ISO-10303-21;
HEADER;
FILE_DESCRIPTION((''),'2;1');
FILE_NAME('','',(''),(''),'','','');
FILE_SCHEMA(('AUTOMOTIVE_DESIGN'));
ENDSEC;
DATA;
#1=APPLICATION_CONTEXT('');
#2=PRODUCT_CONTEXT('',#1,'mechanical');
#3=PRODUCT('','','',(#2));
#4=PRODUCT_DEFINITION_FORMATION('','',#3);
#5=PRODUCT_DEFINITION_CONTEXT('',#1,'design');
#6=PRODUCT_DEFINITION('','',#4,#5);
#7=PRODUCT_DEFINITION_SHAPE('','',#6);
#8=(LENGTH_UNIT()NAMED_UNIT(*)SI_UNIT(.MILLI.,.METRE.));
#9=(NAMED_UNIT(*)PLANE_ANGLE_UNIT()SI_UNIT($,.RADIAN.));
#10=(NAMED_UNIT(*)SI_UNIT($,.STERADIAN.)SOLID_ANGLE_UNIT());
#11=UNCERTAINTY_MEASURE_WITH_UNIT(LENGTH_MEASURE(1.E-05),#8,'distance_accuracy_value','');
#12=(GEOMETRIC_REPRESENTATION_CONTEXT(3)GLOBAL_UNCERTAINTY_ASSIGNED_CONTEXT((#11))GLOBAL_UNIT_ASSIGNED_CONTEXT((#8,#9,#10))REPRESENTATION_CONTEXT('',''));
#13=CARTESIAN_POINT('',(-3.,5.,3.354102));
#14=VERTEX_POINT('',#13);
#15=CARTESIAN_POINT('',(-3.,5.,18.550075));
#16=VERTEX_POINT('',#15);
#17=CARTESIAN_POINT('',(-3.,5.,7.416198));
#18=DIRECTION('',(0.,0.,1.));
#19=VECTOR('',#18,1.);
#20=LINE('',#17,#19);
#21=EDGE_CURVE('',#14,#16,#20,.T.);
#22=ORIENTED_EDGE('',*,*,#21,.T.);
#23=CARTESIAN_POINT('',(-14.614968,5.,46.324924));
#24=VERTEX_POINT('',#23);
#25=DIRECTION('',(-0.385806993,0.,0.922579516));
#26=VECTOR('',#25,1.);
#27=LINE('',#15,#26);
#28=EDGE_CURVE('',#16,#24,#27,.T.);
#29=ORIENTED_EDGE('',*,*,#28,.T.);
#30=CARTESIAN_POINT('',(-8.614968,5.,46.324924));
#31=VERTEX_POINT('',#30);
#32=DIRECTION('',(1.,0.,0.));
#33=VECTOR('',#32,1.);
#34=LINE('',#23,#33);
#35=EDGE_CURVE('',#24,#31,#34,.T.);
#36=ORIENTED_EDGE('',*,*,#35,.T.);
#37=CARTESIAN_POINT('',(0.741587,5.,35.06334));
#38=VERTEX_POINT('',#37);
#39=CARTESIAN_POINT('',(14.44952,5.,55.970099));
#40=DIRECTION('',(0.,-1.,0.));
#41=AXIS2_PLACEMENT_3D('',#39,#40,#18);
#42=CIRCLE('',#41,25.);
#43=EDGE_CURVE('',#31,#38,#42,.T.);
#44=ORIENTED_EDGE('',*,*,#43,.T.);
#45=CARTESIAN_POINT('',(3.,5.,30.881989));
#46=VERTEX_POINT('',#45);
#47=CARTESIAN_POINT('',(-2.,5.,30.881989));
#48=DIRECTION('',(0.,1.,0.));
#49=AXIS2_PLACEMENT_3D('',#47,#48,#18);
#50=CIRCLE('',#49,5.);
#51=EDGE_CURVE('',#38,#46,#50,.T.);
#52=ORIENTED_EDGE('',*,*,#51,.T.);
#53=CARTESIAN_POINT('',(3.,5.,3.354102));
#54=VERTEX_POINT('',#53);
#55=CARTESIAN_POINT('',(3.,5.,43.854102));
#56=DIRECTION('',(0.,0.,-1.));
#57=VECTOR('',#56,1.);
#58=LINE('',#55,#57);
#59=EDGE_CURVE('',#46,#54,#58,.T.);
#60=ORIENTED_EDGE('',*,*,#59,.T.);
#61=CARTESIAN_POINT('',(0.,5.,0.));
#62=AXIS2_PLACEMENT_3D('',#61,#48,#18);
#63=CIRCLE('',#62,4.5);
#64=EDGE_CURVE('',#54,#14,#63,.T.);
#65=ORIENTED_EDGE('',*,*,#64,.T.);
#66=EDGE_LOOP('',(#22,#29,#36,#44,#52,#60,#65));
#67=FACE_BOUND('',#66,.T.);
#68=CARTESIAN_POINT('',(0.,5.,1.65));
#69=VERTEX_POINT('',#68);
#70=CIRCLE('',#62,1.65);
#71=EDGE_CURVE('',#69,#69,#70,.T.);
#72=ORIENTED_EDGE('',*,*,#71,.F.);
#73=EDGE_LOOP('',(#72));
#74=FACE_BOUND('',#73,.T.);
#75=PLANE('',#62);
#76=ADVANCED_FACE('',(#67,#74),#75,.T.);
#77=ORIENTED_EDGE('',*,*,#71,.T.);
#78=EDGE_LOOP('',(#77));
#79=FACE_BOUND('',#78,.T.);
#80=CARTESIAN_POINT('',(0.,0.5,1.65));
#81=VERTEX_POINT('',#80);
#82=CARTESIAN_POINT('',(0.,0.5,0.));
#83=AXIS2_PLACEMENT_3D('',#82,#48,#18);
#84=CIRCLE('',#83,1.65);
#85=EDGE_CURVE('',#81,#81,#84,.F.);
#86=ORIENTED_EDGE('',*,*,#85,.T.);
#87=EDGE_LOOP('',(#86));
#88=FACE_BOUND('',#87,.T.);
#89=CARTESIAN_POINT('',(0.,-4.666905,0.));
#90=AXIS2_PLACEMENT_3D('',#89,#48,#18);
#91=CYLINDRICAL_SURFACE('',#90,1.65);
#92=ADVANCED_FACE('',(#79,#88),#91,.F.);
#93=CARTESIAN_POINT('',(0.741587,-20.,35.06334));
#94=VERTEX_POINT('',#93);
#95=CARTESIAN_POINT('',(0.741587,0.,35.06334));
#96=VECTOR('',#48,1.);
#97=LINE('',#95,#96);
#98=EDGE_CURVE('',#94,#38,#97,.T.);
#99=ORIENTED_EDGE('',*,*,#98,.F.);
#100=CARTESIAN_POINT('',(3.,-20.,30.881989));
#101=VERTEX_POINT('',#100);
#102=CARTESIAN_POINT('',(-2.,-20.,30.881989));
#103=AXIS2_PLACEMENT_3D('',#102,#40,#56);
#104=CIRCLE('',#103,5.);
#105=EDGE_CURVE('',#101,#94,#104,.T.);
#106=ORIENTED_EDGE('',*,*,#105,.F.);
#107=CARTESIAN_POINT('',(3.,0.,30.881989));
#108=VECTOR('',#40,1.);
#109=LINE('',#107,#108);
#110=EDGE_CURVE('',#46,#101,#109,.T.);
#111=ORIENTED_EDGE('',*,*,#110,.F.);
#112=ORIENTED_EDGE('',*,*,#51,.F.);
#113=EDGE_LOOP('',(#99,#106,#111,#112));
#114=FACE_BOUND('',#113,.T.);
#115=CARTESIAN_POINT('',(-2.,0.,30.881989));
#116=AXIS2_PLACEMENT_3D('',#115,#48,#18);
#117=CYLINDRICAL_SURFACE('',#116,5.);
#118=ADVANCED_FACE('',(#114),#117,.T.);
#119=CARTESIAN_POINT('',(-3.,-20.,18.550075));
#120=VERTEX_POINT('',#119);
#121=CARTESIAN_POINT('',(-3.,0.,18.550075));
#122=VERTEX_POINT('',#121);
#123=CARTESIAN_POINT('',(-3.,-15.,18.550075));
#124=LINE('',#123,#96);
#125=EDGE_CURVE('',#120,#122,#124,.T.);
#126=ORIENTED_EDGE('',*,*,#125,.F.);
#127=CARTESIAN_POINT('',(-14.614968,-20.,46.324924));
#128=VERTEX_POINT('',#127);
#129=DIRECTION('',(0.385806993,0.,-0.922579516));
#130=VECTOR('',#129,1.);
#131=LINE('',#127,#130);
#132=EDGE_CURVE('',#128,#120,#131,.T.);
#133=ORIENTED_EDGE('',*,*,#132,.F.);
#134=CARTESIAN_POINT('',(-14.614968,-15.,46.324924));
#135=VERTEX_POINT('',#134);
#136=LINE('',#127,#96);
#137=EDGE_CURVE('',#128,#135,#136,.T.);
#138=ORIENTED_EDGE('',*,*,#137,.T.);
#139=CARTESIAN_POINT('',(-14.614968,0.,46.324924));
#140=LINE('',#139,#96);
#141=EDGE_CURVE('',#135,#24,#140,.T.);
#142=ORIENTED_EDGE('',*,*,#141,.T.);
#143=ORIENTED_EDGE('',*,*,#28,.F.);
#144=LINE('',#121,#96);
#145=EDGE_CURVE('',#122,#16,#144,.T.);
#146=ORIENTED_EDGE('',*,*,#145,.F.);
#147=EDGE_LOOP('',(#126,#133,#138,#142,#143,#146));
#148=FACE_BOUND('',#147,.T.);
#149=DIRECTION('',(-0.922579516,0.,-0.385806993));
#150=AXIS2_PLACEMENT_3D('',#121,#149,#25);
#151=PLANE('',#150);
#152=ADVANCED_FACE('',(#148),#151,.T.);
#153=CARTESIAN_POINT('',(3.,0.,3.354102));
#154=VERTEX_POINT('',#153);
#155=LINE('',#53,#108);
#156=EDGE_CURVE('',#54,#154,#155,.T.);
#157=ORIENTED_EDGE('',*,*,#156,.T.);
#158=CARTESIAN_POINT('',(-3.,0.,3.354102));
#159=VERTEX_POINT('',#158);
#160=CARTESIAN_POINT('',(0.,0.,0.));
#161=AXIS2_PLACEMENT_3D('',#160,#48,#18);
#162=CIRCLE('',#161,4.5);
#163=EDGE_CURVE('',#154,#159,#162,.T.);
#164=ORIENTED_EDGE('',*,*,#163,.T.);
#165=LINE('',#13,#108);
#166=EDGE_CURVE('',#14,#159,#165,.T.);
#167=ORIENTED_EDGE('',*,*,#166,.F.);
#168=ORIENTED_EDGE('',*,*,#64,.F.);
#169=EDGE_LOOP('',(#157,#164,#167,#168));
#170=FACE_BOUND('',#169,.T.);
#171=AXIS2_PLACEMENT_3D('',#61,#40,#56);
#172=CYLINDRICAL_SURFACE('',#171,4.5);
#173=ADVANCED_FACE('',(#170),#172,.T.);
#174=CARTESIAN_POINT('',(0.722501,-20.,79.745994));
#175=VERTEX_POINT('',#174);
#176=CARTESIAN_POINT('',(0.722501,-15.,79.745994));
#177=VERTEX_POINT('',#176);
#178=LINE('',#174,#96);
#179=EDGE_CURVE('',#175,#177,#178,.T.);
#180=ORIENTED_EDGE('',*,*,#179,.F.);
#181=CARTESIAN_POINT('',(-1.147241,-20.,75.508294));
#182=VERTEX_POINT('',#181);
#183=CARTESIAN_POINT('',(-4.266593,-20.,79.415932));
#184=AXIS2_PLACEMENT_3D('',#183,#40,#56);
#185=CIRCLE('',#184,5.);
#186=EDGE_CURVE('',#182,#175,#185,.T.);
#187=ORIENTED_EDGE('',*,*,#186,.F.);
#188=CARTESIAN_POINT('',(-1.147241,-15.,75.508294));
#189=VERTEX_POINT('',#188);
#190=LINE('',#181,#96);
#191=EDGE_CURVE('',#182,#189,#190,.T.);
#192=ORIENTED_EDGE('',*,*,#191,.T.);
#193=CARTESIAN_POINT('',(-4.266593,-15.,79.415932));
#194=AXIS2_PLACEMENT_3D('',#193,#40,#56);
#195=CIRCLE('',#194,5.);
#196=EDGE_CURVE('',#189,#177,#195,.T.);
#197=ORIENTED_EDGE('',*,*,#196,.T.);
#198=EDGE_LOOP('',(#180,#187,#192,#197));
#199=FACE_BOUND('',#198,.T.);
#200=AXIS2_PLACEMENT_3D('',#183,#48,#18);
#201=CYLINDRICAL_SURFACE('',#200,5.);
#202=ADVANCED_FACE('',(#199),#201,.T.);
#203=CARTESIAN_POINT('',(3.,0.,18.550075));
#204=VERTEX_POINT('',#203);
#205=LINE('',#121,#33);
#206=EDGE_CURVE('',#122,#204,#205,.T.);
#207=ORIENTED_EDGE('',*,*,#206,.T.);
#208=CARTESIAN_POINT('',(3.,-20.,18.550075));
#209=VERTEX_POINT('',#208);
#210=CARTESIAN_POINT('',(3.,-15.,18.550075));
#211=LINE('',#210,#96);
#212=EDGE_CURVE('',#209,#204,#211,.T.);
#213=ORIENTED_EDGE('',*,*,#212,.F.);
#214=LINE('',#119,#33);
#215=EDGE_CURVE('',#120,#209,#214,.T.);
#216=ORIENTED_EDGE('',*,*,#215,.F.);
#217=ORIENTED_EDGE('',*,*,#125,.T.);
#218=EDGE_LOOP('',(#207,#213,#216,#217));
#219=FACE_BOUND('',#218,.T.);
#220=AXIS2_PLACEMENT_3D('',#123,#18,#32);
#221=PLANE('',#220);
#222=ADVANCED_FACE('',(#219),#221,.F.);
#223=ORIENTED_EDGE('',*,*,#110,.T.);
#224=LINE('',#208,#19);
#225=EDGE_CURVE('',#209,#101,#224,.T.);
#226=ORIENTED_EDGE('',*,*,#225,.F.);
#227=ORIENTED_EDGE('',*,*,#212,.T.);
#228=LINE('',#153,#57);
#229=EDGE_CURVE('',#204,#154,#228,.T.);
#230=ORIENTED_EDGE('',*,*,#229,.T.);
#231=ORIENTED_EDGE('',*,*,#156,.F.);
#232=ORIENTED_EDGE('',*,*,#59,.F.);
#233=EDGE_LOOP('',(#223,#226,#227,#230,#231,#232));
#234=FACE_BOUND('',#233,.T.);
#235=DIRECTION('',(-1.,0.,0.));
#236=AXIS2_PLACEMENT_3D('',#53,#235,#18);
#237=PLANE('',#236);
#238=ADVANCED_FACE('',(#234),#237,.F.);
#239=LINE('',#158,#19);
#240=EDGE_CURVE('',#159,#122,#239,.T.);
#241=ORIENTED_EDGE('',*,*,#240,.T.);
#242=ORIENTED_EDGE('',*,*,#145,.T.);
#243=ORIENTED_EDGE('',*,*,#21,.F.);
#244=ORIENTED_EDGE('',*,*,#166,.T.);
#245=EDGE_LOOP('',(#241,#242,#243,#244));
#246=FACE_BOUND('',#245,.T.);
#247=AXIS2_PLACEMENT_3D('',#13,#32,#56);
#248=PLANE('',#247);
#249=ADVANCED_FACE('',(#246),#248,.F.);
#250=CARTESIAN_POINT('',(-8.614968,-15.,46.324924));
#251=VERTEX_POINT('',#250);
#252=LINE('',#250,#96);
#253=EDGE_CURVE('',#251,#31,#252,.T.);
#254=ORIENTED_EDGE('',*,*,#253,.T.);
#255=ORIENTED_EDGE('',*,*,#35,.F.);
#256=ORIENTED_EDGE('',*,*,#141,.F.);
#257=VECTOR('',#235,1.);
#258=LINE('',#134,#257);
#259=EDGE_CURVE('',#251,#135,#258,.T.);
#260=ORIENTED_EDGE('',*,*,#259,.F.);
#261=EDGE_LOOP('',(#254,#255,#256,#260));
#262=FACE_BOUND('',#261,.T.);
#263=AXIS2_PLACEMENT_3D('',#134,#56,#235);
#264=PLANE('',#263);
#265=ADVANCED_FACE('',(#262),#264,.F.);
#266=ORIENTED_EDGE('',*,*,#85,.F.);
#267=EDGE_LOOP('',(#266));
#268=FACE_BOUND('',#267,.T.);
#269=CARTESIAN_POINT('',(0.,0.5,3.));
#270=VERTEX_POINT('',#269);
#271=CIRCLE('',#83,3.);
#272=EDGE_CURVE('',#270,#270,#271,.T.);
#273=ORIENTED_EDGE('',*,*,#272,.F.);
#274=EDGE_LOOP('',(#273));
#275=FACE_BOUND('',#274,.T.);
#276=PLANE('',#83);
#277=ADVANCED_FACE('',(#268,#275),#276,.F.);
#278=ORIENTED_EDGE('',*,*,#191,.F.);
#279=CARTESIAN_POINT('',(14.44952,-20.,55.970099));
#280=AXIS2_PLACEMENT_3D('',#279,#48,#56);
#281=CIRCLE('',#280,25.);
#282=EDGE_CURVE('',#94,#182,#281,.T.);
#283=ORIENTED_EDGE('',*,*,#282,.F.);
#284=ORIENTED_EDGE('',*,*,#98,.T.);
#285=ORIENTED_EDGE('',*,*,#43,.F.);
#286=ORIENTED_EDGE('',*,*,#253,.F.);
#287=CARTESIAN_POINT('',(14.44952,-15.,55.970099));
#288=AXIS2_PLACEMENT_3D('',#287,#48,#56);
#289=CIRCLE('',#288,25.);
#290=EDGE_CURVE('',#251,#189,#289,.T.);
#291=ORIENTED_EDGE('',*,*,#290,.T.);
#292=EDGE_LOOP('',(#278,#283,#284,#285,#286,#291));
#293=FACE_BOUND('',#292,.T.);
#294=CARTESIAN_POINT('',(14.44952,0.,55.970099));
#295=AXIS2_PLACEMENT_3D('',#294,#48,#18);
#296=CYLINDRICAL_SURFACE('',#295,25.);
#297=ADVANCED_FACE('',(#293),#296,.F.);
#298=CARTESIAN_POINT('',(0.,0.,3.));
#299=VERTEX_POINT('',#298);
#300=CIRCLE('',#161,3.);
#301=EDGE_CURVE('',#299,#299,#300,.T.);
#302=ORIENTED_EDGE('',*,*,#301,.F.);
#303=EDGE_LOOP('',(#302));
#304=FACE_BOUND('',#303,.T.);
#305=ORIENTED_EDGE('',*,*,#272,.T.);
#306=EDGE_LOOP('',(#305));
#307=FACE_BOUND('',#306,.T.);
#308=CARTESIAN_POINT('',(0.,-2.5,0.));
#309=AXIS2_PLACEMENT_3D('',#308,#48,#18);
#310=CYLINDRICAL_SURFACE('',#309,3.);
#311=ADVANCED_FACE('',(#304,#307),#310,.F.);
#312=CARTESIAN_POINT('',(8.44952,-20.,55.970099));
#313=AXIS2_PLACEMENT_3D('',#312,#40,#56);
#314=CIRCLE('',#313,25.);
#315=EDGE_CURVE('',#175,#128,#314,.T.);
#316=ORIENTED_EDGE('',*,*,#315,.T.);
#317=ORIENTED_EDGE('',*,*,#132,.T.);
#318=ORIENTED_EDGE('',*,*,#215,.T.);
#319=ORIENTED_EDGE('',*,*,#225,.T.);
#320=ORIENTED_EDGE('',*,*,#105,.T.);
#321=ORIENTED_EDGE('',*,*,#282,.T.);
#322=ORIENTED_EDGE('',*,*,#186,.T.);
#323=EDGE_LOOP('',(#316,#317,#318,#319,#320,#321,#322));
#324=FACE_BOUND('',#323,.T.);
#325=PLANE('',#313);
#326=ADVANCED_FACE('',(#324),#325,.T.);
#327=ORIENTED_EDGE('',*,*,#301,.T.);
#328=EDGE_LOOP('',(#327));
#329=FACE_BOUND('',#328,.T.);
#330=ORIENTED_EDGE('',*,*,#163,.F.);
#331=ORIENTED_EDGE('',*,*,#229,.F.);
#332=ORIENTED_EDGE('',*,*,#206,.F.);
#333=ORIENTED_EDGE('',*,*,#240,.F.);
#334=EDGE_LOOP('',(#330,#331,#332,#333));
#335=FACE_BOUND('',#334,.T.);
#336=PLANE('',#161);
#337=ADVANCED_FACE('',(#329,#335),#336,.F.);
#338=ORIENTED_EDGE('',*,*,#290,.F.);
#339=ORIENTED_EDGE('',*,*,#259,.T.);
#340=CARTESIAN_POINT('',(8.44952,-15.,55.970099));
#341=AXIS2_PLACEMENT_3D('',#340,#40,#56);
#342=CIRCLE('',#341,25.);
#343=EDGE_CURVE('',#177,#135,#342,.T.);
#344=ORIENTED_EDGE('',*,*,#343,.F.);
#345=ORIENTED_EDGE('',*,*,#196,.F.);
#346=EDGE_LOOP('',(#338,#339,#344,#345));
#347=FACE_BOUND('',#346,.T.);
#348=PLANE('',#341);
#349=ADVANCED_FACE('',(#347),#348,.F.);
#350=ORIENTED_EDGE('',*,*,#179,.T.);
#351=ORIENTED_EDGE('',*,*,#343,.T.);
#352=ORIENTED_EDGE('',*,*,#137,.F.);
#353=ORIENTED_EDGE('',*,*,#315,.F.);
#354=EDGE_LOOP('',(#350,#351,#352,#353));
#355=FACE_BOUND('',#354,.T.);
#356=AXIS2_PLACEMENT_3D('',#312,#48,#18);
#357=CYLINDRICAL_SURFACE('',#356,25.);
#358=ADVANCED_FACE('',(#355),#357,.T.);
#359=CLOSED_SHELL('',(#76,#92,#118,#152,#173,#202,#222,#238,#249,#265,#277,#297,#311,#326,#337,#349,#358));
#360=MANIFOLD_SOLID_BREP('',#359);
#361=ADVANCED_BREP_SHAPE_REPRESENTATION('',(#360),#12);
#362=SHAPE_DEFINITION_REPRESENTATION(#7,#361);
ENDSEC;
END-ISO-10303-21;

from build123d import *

# Parameters (mm, degrees)
EXTRUDE_2_DEPTH     = 5
SKETCH_4_R          = 1.65
CUT_EXTRUDE_1_DEPTH = 5
EXTRUDE_3_DEPTH     = 5
CUT_EXTRUDE_START   = -4.5
SKETCH_7_R          = 3
CUT_EXTRUDE_2_DEPTH = 3
CUT_EXTRUDE_3_DEPTH = 7.5
EXTRUDE_4_DEPTH     = 5
FILLET_1_R          = 5
FILLET_2_R          = 5
EXTRUDE_5_DEPTH     = 15
EXTRUDE_6_DEPTH     = 5
CUT_EXTRUDE_START_2 = -5
CUT_EXTRUDE_4_DEPTH = 5


with BuildPart() as part:
    # 草图3 → 凸台-拉伸2 (new body)
    with BuildSketch(Plane(origin=(0, 0, 0), x_dir=(1, 0, 0), z_dir=(0, 1, 0))):
        with BuildLine():
            Line((-3, -3.354101966), (-3, -7.416198487))
            Line((-3, -7.416198487), (-3, -43.854101966))
            Line((-3, -43.854101966), (3, -43.854101966))
            Line((3, -43.854101966), (3, -10.583005244))
            Line((3, -10.583005244), (3, -7.416198487))
            Line((3, -7.416198487), (3, -3.354101966))
            ThreePointArc((3, -3.354101966), (0, 4.5), (-3, -3.354101966))
        make_face()
    extrude(amount=EXTRUDE_2_DEPTH)

    # 草图4 → 切除-拉伸1 (cut)
    with BuildSketch(Plane(origin=(0, 5, 0), x_dir=(1, 0, 0), z_dir=(0, 1, 0))):
        with Locations(Location((0, 0, 0), (0, 0, 270))):
            Circle(SKETCH_4_R)
    extrude(amount=-CUT_EXTRUDE_1_DEPTH, mode=Mode.SUBTRACT)

    # 草图6 → 凸台-拉伸3 (add)
    with BuildSketch(Plane(origin=(0, 5, 0), x_dir=(1, 0, 0), z_dir=(0, 1, 0))):
        with BuildLine():
            Line((3, -33.74604712), (-3, -33.74604712))
            ThreePointArc((-3, -33.74604712), (-16.46902092, -57.986607816), (0.722500961, -79.745993902))
            Line((0.722500961, -79.745993902), (1.949520222, -77.620734201))
            ThreePointArc((1.949520222, -77.620734201), (-10.543317179, -55.371702353), (3, -33.74604712))
        make_face()
    extrude(amount=-EXTRUDE_3_DEPTH)

    # 草图7 → 切除-拉伸2 (cut)
    with BuildSketch(Plane(origin=(0, 5, 0), x_dir=(1, 0, 0), z_dir=(0, 1, 0)).offset(CUT_EXTRUDE_START)):
        with Locations(Location((0, 0, 0), (0, 0, 270))):
            Circle(SKETCH_7_R)
    extrude(amount=-CUT_EXTRUDE_2_DEPTH, mode=Mode.SUBTRACT)

    # 草图8 → 切除-拉伸3 (cut)
    with BuildSketch(Plane(origin=(0, 5, 0), x_dir=(1, 0, 0), z_dir=(0, 1, 0))):
        with BuildLine():
            Line((-3, -38.067187498), (-3, -43.854101966))
            Line((-3, -43.854101966), (3, -43.854101966))
            Line((3, -43.854101966), (3, -33.74604712))
            ThreePointArc((3, -33.74604712), (-0.160637142, -35.683569047), (-3, -38.067187498))
        make_face()
    extrude(amount=-CUT_EXTRUDE_3_DEPTH, mode=Mode.SUBTRACT)

    # 草图9 → 凸台-拉伸4 (add)
    with BuildSketch(Plane(origin=(0, 5, 0), x_dir=(1, 0, 0), z_dir=(0, 1, 0))):
        with BuildLine():
            Line((-3, -18.550074543), (-14.614967684, -46.324924269))
            ThreePointArc((-14.614967684, -46.324924269), (-9.917875534, -39.010182445), (-3, -33.74604712))
            Line((-3, -33.74604712), (-3, -18.550074543))
        make_face()
    extrude(amount=-EXTRUDE_4_DEPTH)

    # 圆角1
    fillet_1_edges = [part.edges().sort_by_distance(p)[0] for p in [
        (3, 2.5, 33.74604712),
    ]]
    fillet(fillet_1_edges, radius=FILLET_1_R)

    # 圆角2
    # the kernel refuses this fillet: 5 mm, written as the material it takes off along each edge
    with BuildSketch(Plane(origin=(1.949520222, 14.371610933, 77.620734201), x_dir=(-0.8261015944022844, 0, -0.5635212114250925), z_dir=(0, -1, 0))) as fillet_2_piece_1:
        with BuildLine():
            CenterArc((4.123508811, -4.985927863), FILLET_2_R, 94.299664485, 55.185648669)
            Line((-0.183986354, -2.447131808), (-0.270136257, -2.396355887))
            ThreePointArc((-0.270136257, -2.396355887), (-0.191711734, -1.216068615), (-0.099718557, 0.007497289))
            Line((-0.099718557, 0.007497289), (0.007497289, 0.099718557))
            ThreePointArc((0.007497289, 0.099718557), (1.874322187, 0.029639314), (3.741147084, 0.099718557))
            Line((3.741147084, 0.099718557), (3.748644373, 0))
        make_face()
    extrude(amount=23.743221866, mode=Mode.SUBTRACT)

    # 草图10 → 凸台-拉伸5 (add)
    with BuildSketch(Plane.XZ):
        with BuildLine():
            Line((-3, 18.550074543), (3, 18.550074543))
            Line((3, 18.550074543), (3, 30.881988685))
            ThreePointArc((3, 30.881988685), (2.399314351, 33.25812699), (0.741586704, 35.063340422))
            ThreePointArc((0.741586704, 35.063340422), (-4.779586935, 39.993821756), (-8.614967684, 46.324924269))
            Line((-8.614967684, 46.324924269), (-14.614967684, 46.324924269))
            Line((-14.614967684, 46.324924269), (-3, 18.550074543))
        make_face()
    extrude(amount=EXTRUDE_5_DEPTH)

    # 草图11 → 凸台-拉伸6 (add)
    with BuildSketch(Plane.XZ.offset(15)):
        with BuildLine():
            Line((-14.614967684, 46.324924269), (-3, 18.550074543))
            Line((-3, 18.550074543), (3, 18.550074543))
            Line((3, 18.550074543), (3, 30.881988685))
            ThreePointArc((3, 30.881988685), (2.399314351, 33.25812699), (0.741586704, 35.063340422))
            ThreePointArc((0.741586704, 35.063340422), (-4.779586935, 39.993821756), (-8.614967684, 46.324924269))
            ThreePointArc((-8.614967684, 46.324924269), (-9.770106213, 62.167654699), (-1.147240872, 75.508293582))
            ThreePointArc((-1.147240872, 75.508293582), (0.307928877, 77.397579493), (0.722500961, 79.745993902))
            ThreePointArc((0.722500961, 79.745993902), (-14.272081884, 66.397409294), (-14.614967684, 46.324924269))
        make_face()
    extrude(amount=EXTRUDE_6_DEPTH)

    # 草图12 → 切除-拉伸4 (cut)
    with BuildSketch(Plane.XZ.offset(CUT_EXTRUDE_START_2)):
        with BuildLine():
            Line((-14.614967684, 46.324924269), (-8.614967684, 46.324924269))
            ThreePointArc((-8.614967684, 46.324924269), (-9.770106213, 62.167654699), (-1.147240872, 75.508293582))
            ThreePointArc((-1.147240872, 75.508293582), (0.307928877, 77.397579493), (0.722500961, 79.745993902))
            ThreePointArc((0.722500961, 79.745993902), (-14.272081884, 66.397409294), (-14.614967684, 46.324924269))
        make_face()
    extrude(amount=CUT_EXTRUDE_4_DEPTH, mode=Mode.SUBTRACT)


solid = part.part
